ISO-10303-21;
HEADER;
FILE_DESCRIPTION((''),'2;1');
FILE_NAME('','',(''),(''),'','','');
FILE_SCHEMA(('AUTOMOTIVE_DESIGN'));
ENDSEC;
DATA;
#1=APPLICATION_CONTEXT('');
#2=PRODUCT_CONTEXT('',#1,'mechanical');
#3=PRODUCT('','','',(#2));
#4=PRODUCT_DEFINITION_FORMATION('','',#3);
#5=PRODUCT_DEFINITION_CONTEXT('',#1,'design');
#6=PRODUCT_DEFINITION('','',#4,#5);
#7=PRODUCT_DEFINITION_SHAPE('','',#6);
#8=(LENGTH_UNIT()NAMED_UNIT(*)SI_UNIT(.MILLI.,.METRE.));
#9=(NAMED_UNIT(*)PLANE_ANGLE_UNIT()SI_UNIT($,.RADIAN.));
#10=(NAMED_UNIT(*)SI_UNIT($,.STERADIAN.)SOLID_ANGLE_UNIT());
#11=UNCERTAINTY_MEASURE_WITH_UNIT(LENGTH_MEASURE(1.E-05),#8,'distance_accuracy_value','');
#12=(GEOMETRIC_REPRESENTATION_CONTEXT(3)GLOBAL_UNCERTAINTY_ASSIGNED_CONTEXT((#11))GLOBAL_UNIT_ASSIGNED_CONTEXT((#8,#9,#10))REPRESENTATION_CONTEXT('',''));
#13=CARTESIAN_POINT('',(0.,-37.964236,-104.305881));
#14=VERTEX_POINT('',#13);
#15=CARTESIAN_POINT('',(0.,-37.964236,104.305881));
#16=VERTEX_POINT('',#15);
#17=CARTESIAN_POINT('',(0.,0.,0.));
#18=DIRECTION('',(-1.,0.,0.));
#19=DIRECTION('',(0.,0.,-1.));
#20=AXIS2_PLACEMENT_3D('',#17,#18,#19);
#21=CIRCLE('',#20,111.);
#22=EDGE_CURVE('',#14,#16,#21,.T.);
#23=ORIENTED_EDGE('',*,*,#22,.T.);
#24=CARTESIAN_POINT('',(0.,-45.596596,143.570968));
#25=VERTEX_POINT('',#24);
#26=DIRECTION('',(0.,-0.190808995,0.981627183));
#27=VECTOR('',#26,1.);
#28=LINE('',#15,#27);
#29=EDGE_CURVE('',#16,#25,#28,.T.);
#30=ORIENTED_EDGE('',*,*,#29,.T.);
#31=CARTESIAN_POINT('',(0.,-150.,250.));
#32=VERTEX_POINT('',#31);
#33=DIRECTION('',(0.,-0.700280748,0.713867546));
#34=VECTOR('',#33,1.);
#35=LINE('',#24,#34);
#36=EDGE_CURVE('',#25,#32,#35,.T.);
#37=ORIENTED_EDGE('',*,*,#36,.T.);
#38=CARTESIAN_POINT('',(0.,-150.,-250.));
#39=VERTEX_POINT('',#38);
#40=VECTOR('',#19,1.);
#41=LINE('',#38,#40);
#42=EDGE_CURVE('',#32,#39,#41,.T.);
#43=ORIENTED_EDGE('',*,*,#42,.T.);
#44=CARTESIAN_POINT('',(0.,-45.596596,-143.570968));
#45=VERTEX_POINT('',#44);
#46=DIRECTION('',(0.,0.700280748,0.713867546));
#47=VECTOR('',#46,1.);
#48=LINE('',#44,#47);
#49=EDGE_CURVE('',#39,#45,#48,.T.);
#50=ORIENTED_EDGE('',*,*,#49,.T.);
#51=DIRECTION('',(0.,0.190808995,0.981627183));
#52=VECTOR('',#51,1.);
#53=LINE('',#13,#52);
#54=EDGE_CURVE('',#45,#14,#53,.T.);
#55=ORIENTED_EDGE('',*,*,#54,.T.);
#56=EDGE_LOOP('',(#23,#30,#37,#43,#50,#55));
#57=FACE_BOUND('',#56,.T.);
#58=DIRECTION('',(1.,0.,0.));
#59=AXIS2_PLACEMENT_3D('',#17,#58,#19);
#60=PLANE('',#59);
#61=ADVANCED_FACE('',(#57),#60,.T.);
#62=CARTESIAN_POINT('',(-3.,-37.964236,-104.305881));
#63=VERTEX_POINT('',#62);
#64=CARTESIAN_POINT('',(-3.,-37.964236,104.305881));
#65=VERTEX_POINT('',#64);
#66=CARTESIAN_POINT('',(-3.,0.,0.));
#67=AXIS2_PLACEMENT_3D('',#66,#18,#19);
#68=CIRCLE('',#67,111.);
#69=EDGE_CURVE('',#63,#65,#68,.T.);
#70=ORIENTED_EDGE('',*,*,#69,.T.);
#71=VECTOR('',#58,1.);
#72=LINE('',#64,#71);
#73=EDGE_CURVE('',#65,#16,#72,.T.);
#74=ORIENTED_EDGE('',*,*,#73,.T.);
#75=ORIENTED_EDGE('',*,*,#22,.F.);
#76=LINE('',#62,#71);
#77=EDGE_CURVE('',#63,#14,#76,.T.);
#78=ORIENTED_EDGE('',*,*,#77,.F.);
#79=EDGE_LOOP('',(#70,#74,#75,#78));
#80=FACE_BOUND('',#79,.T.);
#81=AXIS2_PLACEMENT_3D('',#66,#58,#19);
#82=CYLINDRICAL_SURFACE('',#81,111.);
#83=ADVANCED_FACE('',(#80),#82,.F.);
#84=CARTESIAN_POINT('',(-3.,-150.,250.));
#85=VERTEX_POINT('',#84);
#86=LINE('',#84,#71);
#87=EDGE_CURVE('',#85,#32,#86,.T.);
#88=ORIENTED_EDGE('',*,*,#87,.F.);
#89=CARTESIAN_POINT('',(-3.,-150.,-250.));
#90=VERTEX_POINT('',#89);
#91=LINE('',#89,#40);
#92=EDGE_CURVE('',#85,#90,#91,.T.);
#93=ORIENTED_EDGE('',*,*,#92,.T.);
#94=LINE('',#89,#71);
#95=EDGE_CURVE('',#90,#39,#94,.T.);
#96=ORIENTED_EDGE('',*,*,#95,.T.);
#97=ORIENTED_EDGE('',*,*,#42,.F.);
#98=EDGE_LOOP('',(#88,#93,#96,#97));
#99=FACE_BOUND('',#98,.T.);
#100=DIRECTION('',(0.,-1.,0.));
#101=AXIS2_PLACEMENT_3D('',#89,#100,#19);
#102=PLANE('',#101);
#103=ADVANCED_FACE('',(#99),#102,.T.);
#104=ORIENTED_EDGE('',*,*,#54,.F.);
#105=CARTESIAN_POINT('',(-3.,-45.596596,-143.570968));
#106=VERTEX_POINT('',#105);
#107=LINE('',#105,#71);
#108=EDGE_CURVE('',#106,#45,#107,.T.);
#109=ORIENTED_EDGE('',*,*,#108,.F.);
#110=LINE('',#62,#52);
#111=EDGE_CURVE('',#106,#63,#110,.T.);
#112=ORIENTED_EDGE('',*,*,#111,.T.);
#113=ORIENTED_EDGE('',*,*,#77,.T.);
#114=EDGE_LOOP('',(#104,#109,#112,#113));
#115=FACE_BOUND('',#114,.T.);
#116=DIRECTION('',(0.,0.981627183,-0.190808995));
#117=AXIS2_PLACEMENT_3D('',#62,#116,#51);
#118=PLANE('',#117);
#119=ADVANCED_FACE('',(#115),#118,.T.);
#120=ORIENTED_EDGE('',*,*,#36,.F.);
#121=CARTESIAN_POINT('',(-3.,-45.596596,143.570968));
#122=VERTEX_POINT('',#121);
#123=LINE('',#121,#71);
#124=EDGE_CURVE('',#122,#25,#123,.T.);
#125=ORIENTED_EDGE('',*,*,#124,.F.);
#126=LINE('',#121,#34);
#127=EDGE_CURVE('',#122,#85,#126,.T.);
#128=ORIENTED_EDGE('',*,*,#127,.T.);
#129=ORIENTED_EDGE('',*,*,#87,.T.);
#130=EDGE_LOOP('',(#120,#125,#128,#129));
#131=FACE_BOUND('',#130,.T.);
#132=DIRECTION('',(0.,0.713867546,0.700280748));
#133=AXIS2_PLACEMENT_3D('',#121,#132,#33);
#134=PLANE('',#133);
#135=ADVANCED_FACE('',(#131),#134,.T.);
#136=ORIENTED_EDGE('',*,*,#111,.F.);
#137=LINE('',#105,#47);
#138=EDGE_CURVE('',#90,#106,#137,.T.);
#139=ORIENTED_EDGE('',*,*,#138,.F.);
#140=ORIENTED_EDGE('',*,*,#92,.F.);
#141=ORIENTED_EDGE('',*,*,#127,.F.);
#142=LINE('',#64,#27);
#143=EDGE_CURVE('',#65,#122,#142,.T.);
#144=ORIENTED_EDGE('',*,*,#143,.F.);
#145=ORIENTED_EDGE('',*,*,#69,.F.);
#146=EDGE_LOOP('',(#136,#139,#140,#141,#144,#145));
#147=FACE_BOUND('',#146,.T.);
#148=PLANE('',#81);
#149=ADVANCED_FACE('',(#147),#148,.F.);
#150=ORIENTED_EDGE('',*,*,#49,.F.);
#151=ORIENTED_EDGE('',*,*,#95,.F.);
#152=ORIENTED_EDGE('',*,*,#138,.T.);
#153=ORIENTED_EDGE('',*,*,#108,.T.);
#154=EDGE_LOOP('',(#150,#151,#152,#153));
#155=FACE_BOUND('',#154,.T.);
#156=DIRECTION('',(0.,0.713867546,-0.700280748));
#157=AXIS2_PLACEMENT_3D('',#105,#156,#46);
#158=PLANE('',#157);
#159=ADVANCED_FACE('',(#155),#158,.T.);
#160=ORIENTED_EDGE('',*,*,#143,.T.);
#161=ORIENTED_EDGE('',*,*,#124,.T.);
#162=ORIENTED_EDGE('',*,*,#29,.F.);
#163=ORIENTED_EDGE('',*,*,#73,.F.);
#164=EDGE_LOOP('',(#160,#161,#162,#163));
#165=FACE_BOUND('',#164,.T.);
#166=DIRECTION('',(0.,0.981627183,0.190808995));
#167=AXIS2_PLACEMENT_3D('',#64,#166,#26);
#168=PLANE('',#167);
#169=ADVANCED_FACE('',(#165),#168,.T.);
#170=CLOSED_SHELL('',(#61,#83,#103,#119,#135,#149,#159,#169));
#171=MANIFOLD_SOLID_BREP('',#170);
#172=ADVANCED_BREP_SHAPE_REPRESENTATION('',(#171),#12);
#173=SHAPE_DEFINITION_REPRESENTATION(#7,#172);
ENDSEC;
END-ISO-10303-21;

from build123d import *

# Parameters (mm, degrees)
SM_BASE_FLANGE_1_DEPTH = 3


# Sheet-metal steps are written as plain solids
with BuildPart() as part:
    # Sketch 1 → Базовая кромка1 (new body)
    with BuildSketch(Plane(origin=(0, 0, 0), x_dir=(0, 0, -1), z_dir=(1, 0, 0))):
        with BuildLine():
            Line((250, -150), (-250, -150))
            Line((-250, -150), (-143.570968245, -45.596595724))
            Line((-143.570968245, -45.596595724), (-104.305880907, -37.964235909))
            ThreePointArc((-104.305880907, -37.964235909), (0, -111), (104.305880907, -37.964235909))
            Line((104.305880907, -37.964235909), (143.570968245, -45.596595724))
            Line((143.570968245, -45.596595724), (250, -150))
        make_face()
    extrude(amount=-SM_BASE_FLANGE_1_DEPTH)


solid = part.part
